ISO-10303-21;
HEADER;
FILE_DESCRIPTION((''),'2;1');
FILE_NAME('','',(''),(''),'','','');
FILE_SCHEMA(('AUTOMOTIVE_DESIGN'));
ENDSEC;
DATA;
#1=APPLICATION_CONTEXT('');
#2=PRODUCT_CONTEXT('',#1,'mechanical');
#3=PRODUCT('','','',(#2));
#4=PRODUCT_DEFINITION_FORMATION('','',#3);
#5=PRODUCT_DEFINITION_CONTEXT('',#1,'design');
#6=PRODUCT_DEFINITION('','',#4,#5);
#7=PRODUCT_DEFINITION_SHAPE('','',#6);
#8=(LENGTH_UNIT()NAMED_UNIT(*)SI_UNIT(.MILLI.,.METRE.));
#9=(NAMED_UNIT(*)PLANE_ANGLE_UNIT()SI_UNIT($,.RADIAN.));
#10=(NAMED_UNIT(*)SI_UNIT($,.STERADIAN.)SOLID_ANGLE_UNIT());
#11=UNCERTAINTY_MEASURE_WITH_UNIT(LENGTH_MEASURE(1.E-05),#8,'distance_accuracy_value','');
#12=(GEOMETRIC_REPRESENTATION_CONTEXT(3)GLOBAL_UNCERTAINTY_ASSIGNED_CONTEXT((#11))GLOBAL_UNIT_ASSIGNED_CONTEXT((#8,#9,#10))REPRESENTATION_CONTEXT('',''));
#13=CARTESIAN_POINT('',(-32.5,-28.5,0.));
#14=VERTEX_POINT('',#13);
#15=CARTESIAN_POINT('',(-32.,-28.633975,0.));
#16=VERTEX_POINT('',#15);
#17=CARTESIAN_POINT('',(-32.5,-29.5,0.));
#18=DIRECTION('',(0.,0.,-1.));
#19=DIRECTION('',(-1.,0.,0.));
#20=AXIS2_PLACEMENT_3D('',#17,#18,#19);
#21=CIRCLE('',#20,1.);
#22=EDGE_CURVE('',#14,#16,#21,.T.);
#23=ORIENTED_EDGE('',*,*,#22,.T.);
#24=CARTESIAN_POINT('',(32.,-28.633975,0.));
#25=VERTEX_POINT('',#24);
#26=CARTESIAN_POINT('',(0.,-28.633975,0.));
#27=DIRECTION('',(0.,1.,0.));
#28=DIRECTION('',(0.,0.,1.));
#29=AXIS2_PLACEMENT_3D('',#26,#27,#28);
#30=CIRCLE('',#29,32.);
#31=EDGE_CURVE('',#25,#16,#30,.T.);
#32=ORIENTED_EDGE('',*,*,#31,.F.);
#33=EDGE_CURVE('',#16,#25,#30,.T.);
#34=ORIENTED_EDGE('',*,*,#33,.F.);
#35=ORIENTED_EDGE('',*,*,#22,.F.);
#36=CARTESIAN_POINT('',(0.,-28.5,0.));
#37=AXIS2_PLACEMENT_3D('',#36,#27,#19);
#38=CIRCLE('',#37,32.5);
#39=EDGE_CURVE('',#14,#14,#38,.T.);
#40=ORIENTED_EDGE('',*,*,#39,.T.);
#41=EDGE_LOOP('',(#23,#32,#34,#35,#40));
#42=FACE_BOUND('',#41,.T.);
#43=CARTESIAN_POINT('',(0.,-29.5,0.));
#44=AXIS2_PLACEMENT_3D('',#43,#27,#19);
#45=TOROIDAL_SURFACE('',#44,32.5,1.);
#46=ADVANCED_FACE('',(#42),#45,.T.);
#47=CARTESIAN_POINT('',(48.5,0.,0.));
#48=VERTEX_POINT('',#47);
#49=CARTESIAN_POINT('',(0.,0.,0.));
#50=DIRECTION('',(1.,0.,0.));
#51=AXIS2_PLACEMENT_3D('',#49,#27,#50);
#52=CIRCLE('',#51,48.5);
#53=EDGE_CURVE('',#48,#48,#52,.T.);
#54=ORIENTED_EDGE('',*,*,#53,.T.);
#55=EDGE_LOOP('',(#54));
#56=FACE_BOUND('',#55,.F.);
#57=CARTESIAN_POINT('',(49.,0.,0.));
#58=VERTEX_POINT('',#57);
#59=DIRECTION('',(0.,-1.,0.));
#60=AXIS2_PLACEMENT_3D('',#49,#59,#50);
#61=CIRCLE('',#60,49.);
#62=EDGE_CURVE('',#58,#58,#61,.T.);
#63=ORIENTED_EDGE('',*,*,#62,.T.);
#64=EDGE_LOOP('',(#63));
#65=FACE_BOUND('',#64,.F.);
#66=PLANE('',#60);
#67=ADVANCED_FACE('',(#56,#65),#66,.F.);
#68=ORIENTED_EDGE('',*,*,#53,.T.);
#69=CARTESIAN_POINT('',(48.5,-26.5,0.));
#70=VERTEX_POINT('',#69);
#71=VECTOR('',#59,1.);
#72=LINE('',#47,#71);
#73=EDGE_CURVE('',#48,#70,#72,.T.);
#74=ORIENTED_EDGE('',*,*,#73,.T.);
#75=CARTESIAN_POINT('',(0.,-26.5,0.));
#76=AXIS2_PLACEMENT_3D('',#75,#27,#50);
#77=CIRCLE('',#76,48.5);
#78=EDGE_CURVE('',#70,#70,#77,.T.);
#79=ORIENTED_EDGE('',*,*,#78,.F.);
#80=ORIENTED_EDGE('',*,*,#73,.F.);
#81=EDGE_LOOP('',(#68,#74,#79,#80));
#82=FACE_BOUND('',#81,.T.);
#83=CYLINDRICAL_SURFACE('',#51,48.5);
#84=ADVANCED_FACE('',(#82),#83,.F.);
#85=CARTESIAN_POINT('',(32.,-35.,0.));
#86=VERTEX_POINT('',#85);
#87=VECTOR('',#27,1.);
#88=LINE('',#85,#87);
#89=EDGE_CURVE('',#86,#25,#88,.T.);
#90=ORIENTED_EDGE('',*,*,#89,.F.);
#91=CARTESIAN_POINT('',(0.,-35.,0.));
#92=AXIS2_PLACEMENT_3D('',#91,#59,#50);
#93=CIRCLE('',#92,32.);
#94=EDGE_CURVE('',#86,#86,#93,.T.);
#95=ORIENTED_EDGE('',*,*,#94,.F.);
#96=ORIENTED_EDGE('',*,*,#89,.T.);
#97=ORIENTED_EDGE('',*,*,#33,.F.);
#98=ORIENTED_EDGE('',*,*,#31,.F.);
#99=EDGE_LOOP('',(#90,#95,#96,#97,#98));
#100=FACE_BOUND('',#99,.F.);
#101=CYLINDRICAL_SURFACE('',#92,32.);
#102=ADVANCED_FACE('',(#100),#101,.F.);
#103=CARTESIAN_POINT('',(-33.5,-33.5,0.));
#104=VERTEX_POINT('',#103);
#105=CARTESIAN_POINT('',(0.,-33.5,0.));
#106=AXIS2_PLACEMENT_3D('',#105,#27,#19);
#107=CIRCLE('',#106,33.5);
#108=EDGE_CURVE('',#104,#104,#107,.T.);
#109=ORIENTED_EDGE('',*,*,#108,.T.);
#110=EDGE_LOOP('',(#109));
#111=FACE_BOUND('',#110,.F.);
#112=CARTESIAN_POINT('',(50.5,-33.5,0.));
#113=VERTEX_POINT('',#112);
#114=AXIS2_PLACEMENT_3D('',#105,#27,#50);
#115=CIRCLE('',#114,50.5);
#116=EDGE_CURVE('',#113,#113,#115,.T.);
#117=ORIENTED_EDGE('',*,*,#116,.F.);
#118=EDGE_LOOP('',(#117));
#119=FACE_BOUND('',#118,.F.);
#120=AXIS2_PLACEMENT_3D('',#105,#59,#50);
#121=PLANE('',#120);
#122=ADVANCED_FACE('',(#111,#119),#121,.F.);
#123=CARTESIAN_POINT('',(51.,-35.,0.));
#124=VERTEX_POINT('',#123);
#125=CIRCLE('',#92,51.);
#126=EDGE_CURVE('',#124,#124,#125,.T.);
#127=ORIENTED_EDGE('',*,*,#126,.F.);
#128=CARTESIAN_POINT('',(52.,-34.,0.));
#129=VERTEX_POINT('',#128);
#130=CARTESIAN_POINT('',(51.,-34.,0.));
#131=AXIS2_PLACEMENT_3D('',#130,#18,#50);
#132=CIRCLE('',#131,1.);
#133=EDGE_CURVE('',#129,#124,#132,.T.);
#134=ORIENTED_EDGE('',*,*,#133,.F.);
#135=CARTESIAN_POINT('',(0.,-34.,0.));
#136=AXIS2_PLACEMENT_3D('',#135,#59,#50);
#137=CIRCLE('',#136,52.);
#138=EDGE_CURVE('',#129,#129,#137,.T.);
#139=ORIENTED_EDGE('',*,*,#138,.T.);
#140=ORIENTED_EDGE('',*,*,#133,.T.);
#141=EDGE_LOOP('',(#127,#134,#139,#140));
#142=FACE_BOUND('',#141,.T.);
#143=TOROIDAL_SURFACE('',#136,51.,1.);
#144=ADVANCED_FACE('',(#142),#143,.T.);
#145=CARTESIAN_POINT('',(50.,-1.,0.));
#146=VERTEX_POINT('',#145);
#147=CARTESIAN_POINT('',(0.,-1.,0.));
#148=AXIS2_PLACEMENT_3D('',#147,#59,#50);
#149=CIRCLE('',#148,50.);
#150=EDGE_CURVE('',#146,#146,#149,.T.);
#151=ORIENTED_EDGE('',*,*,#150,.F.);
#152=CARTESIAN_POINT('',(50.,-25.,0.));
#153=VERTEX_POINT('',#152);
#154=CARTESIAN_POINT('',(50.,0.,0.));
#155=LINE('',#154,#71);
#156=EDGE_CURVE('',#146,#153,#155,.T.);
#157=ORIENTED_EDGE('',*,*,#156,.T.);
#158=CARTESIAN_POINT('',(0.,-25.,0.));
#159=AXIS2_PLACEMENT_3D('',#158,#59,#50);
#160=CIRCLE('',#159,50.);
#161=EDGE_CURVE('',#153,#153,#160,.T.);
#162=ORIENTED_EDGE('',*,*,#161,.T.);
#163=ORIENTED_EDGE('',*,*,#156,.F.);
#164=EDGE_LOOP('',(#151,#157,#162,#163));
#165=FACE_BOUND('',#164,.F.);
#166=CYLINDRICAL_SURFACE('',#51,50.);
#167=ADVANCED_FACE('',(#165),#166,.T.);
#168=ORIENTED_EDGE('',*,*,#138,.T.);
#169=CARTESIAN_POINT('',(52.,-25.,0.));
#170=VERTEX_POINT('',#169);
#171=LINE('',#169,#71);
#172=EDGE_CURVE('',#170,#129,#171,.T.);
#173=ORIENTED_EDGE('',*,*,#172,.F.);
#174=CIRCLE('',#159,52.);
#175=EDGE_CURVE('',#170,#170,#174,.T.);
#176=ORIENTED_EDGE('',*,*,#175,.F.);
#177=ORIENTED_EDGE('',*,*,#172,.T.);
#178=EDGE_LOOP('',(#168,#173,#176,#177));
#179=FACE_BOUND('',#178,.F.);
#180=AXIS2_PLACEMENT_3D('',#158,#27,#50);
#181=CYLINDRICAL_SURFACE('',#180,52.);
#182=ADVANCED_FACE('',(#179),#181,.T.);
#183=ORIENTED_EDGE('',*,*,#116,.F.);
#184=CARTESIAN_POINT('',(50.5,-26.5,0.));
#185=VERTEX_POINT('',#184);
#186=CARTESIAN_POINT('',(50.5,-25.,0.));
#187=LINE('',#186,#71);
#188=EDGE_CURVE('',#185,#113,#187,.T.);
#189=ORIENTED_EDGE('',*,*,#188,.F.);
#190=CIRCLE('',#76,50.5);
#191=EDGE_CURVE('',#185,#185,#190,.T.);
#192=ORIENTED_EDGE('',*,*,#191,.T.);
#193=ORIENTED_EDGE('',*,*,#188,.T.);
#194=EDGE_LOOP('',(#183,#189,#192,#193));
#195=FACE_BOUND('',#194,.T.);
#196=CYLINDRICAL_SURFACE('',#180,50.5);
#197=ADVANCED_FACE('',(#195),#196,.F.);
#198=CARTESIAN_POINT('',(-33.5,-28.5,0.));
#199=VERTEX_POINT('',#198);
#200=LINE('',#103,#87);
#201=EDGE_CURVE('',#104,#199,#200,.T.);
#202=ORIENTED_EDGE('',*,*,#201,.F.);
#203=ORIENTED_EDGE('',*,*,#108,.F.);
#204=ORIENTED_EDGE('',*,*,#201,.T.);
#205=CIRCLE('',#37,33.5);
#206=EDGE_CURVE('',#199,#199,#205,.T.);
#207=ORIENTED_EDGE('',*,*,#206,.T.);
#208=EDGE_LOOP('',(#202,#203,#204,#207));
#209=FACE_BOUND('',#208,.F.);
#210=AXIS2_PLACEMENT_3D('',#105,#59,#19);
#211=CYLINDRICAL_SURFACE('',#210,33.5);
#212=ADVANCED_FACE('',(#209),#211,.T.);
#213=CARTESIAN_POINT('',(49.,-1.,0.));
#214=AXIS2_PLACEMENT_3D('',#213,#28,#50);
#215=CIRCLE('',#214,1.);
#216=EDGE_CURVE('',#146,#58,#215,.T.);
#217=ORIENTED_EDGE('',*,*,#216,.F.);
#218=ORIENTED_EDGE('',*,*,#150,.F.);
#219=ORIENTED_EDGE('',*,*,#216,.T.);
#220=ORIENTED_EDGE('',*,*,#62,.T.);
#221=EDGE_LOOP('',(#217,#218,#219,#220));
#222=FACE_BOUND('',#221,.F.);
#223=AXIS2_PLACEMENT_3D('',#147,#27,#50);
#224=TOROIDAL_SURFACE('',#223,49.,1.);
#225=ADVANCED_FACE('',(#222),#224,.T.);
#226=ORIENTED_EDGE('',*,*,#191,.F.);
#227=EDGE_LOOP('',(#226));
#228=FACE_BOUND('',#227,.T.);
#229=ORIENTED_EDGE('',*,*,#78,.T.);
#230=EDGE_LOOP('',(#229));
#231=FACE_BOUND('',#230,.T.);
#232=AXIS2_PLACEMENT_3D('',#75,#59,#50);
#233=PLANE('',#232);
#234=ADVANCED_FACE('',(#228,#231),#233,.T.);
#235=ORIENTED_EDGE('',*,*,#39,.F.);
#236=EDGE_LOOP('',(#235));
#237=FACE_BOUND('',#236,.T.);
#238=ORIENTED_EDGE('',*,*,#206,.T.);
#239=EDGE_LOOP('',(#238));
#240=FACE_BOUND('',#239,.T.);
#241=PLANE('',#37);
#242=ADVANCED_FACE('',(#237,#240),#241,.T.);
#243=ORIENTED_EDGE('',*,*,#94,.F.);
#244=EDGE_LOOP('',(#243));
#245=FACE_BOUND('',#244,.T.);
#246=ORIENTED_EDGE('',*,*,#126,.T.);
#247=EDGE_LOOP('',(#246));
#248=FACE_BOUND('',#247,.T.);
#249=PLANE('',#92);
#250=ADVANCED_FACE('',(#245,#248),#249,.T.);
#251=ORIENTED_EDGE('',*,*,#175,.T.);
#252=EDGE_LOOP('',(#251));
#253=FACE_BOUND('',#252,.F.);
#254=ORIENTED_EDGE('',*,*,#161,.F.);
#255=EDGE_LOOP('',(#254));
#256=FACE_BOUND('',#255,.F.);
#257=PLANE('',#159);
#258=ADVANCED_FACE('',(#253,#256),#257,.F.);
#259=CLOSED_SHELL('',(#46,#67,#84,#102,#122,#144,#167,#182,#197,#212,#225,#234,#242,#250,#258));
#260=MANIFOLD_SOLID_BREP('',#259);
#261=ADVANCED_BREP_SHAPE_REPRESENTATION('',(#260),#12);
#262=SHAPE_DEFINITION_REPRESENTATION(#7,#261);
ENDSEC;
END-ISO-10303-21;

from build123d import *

# Parameters (mm, degrees)
F0_R      = 50
F1_DEPTH  = 25
F2_R      = 52
F2_R_2    = 50
F3_DEPTH  = 10
F5_T      = -1.5
F6_R      = 33.5
F6_R_2    = 31.5
F7_DEPTH  = 5
F8_R      = 1
F9_R      = 32
F10_DEPTH = 25


# Not quite as in the source:
# - a feature of the source that left no trace in its solid (it failed there, or was rolled back) is left out


with BuildPart() as f1:
    # F0 (on Front) → F1 (new body)
    with BuildSketch(Plane.XZ):
        Circle(F0_R)
    extrude(amount=F1_DEPTH)

    # F2 (on face) → F3 (join)
    with BuildSketch(Plane.XZ.offset(25)):
        Circle(F2_R)
        Circle(F2_R_2, mode=Mode.SUBTRACT)
        Circle(F2_R_2)
    extrude(amount=F3_DEPTH)

    # F5
    f5_openings = [f1.faces().sort_by_distance(p)[0] for p in [
        (0, 0, 0),
    ]]
    offset(amount=F5_T, openings=f5_openings, kind=Kind.INTERSECTION)

    # F6 (on face) → F7 (join)
    with BuildSketch(Plane(origin=(0, -33.5, 0), x_dir=(-1, 0, 0), z_dir=(0, 1, 0))):
        Circle(F6_R)
        Circle(F6_R_2, mode=Mode.SUBTRACT)
    extrude(amount=F7_DEPTH)

    # F8
    f8_edges = [f1.edges().sort_by_distance(p)[0] for p in [
        (31.5, -28.5, 0),
        (-52, -35, 0),
        (-50, 0, 0),
    ]]
    fillet(f8_edges, radius=F8_R)

    # F9 (on face) → F10 (cut)
    with BuildSketch(Plane.XZ.offset(35)):
        Circle(F9_R)
    extrude(amount=-F10_DEPTH, mode=Mode.SUBTRACT)


solid = f1.part
